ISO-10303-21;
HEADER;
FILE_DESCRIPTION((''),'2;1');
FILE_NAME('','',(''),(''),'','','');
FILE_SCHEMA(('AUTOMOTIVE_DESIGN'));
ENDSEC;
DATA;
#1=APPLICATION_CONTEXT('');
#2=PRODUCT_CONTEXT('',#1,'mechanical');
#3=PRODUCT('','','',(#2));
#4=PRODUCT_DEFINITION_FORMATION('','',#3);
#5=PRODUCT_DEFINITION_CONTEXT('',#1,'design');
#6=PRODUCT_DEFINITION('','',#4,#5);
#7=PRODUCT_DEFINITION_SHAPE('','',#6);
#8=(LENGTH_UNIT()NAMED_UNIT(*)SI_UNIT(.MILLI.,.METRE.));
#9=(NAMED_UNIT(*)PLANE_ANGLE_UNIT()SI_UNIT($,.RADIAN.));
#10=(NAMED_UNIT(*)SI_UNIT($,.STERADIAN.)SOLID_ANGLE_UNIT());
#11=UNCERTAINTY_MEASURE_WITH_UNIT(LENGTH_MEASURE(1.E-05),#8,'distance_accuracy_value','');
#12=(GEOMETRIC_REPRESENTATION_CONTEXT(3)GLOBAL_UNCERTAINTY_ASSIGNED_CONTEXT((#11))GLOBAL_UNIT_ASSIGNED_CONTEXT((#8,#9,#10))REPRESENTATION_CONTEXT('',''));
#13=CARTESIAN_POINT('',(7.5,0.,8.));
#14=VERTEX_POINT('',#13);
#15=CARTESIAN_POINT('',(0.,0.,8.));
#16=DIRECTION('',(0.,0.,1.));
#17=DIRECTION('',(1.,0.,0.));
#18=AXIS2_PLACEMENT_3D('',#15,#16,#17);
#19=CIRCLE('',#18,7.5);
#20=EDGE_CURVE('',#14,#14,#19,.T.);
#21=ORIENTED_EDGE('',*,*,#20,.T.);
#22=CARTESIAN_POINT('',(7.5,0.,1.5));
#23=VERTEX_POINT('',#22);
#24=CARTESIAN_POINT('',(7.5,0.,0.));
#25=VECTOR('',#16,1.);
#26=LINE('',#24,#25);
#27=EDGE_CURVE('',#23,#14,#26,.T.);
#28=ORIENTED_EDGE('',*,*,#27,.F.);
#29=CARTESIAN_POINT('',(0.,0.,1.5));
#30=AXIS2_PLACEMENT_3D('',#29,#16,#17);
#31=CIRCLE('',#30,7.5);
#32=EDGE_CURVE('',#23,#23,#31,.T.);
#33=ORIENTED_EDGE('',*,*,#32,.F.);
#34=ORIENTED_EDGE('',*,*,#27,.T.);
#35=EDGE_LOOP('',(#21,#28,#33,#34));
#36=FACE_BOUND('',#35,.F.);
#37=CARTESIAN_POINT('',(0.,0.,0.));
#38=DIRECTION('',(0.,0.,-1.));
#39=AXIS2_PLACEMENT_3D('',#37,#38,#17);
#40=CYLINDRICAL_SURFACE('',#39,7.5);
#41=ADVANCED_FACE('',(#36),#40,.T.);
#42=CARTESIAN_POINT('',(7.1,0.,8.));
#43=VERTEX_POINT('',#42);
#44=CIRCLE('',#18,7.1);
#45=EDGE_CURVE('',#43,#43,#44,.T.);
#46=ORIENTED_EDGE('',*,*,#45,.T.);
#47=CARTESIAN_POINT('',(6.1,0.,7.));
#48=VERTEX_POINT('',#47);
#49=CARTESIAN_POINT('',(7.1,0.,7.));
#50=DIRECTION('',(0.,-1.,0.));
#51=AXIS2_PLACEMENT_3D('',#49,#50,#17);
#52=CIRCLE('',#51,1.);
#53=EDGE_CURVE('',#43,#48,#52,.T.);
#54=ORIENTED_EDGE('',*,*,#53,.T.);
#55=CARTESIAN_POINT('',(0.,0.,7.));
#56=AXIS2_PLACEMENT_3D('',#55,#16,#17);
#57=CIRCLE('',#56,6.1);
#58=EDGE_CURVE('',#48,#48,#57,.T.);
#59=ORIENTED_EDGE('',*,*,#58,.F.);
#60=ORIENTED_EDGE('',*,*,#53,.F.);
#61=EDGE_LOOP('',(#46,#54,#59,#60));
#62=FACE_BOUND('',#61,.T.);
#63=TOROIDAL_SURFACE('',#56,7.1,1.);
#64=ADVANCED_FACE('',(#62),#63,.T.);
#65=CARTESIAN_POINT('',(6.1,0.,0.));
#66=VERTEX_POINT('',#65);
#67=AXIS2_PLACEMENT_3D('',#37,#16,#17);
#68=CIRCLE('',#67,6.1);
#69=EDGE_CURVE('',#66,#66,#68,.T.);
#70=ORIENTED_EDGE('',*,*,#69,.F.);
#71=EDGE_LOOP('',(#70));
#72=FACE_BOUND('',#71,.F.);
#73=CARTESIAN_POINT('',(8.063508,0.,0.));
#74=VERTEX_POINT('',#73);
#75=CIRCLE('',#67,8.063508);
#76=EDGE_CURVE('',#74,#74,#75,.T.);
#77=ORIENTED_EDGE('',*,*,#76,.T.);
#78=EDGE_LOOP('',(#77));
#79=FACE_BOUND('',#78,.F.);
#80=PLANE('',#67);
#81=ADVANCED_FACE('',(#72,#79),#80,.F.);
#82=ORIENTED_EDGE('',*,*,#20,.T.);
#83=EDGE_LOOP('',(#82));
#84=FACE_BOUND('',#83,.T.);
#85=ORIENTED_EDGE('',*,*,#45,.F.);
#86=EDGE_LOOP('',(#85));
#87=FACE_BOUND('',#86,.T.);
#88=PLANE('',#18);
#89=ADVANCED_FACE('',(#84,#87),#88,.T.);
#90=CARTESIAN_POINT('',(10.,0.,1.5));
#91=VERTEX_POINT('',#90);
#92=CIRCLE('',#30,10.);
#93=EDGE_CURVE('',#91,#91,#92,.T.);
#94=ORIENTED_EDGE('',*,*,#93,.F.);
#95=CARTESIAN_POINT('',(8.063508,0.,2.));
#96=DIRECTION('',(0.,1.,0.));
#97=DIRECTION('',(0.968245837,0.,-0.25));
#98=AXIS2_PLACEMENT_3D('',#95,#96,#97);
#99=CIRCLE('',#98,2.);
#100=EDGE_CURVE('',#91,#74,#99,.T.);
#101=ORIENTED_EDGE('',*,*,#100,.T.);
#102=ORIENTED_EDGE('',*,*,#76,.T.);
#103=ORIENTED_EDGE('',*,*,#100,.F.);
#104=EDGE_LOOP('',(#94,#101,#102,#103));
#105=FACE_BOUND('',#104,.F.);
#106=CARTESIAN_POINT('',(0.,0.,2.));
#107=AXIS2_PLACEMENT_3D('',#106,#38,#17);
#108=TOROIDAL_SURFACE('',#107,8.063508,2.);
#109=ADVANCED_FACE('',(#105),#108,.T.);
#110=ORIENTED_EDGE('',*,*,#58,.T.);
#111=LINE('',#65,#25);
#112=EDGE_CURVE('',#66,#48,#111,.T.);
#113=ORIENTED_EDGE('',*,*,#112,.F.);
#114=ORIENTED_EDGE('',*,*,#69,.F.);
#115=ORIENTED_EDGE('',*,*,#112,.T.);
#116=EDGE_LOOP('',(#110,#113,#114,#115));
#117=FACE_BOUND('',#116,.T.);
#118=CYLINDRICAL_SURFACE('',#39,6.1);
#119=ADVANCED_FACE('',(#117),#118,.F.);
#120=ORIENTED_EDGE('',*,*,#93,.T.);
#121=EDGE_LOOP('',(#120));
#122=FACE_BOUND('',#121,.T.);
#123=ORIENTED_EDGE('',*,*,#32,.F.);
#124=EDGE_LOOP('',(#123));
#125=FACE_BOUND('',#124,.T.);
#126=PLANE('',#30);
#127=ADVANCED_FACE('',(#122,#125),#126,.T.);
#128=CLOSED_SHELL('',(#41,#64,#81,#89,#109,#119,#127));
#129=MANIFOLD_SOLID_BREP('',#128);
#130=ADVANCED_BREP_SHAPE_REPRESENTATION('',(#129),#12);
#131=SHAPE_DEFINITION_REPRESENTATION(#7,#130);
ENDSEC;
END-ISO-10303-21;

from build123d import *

# Parameters (mm, degrees)
F0_R     = 10
F0_R_2   = 7.5
F1_DEPTH = 1.5
F0_R_3   = 6.1
F2_DEPTH = 8
F4_R     = 1


# Not quite as in the source:
# - a fillet or chamfer that OpenCascade refuses, or shapes differently, is made with other operations: its cross-section is extruded or revolved along the edge and cut away or added


with BuildPart() as f1:
    # F0 (on Top) → F1 (new body)
    with BuildSketch(Plane.XY):
        Circle(F0_R)
        Circle(F0_R_2, mode=Mode.SUBTRACT)
    extrude(amount=F1_DEPTH)

    # F0 (on Top) → F2 (join)
    with BuildSketch(Plane.XY):
        Circle(F0_R_2)
        Circle(F0_R_3, mode=Mode.SUBTRACT)
    extrude(amount=F2_DEPTH)

    # F3: fillet of radius 2 on 1 edges, made by hand

    # F3_s1 → F3_t2 (revolve, cut)
    with BuildSketch(Plane.XZ):
        with BuildLine():
            ThreePointArc((10, 1.5), (9.2882531983, 0.4188611699), (8.0635083269, 0))
            Line((8.0635083269, 0), (10, 0))
            Line((10, 0), (10, 1.5))
        make_face()
    revolve(axis=Axis((0, 0, 0), (0, 0, 1)), mode=Mode.SUBTRACT)

    # F4
    f4_edges = [f1.edges().sort_by_distance(p)[0] for p in [
        (-6.1, 0, 8),
    ]]
    fillet(f4_edges, radius=F4_R)


solid = f1.part
